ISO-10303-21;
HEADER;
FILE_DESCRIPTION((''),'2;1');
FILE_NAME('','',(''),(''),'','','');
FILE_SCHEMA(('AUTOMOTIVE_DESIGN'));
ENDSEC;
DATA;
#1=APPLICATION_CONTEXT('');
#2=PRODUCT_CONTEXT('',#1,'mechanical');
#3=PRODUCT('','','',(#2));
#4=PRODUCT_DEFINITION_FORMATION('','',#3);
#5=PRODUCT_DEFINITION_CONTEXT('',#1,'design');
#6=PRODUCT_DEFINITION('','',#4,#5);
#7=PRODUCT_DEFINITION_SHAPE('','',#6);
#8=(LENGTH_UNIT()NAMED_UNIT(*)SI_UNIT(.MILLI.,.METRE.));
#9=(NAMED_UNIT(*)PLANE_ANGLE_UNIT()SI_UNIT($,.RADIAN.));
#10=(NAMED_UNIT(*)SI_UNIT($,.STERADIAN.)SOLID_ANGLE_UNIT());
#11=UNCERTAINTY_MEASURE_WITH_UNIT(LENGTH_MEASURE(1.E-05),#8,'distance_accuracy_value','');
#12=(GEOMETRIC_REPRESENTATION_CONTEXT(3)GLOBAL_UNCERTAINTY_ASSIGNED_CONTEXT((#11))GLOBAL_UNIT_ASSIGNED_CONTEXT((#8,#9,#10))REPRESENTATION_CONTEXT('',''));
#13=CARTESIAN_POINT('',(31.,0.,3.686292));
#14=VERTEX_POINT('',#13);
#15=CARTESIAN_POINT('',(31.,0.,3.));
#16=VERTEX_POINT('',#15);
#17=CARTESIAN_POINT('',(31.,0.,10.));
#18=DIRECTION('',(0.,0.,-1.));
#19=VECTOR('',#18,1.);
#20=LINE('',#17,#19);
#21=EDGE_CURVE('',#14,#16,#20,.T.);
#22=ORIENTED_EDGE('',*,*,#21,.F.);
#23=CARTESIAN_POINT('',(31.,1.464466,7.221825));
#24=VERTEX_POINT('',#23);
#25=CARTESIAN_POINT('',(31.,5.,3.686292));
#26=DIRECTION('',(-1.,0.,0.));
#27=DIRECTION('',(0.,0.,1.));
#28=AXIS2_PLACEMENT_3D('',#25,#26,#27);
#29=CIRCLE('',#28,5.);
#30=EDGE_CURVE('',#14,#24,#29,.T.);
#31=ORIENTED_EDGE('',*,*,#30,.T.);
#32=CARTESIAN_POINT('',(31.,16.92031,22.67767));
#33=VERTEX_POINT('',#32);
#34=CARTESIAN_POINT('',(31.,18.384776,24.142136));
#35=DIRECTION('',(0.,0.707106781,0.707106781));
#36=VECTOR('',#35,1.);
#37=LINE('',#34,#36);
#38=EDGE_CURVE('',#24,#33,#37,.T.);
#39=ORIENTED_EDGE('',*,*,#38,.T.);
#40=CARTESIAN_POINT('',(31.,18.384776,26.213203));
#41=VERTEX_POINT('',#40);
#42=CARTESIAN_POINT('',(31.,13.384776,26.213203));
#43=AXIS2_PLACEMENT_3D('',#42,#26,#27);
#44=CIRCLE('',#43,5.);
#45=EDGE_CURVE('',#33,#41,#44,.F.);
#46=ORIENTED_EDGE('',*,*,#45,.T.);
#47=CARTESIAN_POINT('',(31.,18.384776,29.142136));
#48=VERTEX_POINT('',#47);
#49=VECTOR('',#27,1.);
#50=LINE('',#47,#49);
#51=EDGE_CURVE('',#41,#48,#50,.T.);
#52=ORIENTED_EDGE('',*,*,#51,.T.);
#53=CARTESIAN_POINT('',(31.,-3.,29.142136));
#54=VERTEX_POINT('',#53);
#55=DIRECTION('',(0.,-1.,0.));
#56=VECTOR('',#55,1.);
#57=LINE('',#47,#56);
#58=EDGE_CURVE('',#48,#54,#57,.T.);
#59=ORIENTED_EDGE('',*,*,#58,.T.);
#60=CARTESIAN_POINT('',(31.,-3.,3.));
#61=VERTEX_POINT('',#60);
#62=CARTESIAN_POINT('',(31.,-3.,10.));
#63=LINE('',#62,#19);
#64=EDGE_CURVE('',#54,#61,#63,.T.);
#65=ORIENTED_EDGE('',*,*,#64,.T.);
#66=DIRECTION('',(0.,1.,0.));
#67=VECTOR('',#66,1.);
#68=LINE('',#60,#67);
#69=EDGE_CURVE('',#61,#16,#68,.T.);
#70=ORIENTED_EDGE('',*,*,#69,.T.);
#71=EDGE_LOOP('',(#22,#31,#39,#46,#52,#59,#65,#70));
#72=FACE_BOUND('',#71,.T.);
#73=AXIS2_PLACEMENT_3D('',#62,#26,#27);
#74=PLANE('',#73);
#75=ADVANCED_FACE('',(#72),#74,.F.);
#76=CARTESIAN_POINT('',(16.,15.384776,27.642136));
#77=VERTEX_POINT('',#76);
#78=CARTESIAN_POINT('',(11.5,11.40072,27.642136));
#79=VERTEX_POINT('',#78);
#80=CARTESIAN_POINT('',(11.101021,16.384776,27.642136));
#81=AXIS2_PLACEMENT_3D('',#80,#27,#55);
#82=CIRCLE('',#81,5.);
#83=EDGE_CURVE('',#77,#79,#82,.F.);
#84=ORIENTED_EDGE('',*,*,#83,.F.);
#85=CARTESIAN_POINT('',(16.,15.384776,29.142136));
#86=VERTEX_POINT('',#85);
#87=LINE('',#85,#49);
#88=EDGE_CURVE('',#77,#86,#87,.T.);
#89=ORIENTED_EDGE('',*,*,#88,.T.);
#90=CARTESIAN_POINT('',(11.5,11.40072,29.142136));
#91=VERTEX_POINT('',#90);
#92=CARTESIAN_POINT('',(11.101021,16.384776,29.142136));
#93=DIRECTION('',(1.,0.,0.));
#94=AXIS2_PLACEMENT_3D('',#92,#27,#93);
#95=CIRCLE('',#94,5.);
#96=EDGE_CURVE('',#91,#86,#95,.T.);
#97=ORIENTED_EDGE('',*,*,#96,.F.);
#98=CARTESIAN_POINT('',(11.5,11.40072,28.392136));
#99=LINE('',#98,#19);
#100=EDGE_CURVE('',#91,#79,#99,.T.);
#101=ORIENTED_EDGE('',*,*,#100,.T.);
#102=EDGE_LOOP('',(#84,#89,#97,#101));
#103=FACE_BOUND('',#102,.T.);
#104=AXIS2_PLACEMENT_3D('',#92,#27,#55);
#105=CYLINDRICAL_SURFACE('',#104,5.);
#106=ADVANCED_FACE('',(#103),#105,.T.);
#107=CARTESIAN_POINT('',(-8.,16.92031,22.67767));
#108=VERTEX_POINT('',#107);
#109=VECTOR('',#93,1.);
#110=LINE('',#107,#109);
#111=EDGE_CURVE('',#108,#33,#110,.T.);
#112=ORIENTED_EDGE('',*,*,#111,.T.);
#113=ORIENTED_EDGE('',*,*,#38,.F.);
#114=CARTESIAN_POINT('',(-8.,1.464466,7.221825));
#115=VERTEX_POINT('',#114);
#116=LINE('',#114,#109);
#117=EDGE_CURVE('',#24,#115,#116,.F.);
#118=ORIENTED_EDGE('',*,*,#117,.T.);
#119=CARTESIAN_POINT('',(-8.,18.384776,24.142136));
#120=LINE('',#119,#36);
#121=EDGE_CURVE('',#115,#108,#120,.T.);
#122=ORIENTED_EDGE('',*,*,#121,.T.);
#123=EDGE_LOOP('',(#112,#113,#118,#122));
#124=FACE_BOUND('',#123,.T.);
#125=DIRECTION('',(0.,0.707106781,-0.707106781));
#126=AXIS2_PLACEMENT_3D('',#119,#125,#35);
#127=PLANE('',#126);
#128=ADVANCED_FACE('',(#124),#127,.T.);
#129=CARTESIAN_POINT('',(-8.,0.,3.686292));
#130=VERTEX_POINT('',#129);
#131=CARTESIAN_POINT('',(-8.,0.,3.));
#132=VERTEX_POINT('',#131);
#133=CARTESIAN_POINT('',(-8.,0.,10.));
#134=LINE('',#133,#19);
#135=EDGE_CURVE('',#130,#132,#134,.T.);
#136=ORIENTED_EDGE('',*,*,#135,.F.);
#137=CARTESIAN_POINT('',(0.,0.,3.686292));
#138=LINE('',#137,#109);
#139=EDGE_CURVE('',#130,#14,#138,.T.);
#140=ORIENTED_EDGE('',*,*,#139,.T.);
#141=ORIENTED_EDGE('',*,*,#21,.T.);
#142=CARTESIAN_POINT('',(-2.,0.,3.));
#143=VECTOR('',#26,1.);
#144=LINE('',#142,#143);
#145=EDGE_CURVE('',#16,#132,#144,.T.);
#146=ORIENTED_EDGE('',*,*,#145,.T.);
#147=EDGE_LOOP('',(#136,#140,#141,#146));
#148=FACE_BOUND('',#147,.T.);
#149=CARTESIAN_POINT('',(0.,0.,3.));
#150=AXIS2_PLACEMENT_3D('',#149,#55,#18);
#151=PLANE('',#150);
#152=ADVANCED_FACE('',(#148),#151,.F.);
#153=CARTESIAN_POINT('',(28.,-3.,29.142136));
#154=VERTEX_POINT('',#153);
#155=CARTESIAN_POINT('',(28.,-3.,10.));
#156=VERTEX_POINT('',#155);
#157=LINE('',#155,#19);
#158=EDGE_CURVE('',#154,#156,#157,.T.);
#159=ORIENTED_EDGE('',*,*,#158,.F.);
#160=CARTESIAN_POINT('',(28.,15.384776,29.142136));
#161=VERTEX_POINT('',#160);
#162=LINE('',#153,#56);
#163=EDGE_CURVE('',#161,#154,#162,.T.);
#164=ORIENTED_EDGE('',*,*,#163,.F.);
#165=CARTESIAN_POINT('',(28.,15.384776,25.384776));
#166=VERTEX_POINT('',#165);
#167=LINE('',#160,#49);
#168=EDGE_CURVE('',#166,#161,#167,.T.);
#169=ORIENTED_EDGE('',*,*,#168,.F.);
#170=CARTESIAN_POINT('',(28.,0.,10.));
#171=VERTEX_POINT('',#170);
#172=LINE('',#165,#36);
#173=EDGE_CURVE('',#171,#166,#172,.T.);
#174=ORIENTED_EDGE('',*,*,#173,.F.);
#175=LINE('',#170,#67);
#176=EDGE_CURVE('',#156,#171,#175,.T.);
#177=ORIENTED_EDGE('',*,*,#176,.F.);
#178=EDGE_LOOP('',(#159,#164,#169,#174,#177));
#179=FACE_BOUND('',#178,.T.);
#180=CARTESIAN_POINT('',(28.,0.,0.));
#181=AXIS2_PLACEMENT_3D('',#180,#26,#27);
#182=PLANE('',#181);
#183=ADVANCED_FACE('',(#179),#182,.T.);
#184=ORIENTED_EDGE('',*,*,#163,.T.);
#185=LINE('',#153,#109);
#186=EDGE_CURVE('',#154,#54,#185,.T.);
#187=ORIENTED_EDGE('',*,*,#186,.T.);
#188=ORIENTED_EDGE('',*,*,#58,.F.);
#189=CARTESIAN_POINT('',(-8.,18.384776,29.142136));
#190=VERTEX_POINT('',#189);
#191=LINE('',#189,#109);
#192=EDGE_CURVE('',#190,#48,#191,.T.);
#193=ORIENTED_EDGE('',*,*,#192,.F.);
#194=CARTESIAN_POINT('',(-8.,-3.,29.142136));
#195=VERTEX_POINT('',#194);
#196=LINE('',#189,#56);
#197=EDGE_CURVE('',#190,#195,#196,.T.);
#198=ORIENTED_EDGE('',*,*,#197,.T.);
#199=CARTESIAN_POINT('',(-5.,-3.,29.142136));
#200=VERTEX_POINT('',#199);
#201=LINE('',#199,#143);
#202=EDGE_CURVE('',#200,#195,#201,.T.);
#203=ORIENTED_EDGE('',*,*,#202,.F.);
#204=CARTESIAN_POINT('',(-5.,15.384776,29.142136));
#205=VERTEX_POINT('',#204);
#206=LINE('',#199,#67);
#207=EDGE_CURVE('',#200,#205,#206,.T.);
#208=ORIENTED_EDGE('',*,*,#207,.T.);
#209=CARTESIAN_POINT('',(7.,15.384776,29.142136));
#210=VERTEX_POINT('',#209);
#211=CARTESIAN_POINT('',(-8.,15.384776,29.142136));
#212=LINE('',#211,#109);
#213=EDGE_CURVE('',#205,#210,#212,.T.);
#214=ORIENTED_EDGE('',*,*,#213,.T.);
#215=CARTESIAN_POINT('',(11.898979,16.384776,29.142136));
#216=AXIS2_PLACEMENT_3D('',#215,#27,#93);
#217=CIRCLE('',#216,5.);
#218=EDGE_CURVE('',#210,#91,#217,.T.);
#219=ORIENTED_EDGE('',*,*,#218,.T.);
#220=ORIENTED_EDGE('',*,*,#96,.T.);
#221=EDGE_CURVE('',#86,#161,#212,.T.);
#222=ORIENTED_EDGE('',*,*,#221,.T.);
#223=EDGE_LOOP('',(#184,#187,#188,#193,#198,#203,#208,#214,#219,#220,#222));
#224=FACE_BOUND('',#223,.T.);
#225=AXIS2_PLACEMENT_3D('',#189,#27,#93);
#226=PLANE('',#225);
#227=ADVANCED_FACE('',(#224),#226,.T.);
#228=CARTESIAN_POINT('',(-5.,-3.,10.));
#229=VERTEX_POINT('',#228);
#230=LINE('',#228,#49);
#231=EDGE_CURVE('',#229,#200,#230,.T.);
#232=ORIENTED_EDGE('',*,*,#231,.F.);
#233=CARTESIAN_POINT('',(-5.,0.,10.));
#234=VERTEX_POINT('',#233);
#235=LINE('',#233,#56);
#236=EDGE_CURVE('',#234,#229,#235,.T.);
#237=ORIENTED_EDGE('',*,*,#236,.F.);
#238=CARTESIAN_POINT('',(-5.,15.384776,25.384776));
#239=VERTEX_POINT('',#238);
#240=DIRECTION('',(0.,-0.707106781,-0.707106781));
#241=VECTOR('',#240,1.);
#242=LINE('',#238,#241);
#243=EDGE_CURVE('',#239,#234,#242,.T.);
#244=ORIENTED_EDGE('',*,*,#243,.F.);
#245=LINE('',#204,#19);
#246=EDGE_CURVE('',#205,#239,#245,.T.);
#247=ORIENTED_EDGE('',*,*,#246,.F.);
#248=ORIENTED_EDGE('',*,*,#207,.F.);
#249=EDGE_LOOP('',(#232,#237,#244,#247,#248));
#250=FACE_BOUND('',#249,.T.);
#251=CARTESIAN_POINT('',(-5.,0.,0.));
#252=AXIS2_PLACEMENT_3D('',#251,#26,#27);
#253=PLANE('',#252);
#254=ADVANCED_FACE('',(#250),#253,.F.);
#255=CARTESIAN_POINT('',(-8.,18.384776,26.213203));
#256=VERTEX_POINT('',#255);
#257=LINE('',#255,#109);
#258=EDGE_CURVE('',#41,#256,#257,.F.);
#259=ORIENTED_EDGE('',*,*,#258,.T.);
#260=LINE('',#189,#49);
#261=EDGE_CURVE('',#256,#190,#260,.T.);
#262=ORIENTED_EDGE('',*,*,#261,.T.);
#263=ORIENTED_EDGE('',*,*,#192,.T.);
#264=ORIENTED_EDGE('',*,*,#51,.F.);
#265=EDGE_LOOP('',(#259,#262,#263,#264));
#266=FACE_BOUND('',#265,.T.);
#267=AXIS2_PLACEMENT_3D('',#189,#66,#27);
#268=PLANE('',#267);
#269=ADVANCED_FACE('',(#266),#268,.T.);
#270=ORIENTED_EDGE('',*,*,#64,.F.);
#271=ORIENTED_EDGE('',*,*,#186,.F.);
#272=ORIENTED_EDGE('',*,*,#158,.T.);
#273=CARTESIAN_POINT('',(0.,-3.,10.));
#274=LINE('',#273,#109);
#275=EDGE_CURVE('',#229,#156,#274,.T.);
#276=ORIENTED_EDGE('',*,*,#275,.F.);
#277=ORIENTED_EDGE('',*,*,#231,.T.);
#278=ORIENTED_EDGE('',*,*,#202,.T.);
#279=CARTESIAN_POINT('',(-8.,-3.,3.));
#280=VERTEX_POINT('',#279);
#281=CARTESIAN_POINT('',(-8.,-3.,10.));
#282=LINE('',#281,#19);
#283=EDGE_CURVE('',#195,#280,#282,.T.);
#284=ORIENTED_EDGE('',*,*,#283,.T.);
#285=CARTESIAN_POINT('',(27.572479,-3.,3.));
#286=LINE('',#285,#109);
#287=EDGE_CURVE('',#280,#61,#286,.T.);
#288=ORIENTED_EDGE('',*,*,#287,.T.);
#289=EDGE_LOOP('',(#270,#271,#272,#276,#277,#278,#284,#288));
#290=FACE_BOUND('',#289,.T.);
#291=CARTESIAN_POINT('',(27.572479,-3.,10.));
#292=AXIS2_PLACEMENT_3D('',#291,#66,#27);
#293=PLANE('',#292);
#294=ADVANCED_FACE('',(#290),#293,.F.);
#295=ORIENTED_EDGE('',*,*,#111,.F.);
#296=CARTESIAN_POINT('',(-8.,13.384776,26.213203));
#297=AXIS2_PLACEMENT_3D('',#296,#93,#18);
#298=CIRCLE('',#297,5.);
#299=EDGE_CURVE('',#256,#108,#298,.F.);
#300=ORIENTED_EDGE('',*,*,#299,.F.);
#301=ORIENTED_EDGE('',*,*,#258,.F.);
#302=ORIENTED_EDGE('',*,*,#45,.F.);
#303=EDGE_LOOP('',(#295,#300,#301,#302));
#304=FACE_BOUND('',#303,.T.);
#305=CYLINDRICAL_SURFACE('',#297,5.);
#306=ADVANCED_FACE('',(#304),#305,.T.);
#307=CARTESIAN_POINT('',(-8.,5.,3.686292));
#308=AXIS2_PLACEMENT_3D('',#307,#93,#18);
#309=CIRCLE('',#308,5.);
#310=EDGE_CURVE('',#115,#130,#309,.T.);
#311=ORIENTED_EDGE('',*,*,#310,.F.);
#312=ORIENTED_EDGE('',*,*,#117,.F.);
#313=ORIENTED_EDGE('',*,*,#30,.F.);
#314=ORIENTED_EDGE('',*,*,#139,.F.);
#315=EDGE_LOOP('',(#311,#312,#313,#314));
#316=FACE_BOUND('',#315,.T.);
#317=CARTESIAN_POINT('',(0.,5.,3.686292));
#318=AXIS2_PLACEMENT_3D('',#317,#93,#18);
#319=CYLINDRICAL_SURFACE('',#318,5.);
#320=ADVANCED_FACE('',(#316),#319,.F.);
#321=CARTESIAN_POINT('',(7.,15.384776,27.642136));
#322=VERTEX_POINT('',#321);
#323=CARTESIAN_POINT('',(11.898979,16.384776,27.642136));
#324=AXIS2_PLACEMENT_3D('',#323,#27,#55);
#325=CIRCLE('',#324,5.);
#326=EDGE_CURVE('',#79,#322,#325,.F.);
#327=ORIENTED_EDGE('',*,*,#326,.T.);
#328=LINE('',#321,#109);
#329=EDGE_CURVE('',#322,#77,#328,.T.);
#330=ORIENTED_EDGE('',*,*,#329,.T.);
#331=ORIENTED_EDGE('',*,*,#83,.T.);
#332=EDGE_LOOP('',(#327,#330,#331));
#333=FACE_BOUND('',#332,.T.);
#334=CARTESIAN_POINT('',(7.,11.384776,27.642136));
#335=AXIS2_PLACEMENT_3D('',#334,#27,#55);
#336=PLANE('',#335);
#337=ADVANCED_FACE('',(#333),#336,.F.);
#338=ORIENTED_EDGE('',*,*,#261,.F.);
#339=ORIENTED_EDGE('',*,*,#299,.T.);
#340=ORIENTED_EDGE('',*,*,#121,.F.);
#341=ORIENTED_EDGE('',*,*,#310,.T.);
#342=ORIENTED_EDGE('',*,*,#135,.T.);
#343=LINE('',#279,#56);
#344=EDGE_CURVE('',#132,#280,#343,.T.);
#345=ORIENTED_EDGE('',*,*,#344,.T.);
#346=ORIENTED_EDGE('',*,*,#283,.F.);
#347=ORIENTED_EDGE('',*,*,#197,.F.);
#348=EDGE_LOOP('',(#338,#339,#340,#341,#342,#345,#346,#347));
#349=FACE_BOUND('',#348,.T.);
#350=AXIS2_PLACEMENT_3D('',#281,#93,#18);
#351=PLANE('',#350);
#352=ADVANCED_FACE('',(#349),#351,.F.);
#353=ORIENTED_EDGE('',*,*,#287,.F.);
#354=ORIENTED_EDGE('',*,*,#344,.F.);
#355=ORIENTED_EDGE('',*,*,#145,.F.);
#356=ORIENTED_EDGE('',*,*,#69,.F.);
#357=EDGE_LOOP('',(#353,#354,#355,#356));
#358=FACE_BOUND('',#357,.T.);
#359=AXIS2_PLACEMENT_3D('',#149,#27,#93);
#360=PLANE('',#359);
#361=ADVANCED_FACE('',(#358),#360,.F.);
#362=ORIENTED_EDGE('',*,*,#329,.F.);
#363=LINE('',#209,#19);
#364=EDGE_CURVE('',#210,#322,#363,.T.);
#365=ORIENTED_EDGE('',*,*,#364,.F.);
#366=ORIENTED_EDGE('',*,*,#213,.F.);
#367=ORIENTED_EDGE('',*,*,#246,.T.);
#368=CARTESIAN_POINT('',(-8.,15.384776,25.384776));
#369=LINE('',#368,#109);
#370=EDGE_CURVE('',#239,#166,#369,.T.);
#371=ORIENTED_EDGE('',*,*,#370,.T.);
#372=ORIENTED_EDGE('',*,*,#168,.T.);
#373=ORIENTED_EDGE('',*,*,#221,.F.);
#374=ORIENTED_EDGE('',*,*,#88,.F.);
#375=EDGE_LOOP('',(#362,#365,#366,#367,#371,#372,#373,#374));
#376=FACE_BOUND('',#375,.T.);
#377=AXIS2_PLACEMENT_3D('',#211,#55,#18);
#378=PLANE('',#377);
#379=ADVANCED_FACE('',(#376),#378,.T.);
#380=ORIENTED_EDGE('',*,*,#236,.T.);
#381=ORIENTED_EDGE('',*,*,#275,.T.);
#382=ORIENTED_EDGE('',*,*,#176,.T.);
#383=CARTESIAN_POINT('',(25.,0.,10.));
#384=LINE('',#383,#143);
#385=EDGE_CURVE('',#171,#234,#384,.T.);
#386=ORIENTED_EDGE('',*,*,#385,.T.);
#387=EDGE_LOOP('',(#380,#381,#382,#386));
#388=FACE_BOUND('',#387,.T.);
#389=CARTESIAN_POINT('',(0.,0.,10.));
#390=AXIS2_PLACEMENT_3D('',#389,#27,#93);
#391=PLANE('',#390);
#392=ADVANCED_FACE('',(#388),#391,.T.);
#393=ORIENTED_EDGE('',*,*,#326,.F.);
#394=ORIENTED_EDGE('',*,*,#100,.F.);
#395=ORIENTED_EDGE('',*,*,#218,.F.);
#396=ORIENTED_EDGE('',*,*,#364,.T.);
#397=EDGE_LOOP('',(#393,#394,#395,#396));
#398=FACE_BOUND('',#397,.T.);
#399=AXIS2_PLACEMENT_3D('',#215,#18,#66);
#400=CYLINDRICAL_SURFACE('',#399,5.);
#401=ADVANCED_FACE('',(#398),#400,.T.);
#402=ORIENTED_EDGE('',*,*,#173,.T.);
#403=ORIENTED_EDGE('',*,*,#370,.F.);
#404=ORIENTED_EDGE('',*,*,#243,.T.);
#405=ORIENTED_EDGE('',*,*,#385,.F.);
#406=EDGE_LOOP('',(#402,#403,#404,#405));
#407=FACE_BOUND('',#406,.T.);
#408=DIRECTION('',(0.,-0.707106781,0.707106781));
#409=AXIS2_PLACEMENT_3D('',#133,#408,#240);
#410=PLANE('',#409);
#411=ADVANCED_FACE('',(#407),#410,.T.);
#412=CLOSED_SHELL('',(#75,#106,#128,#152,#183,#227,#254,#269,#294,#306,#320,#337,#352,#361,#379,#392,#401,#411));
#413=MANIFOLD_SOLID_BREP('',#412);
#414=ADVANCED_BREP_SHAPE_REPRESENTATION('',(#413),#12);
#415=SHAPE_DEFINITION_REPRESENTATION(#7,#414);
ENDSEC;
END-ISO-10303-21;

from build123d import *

# Parameters (mm, degrees)
SKETCH_1_W          = 25
SKETCH_1_H          = 10
EXTRUDE_1_DEPTH     = 3
EXTRUDE_3_DEPTH     = 7
EXTRUDE_4_DEPTH     = 39
EXTRUDE_6_DEPTH     = 3
EXTRUDE_7_DEPTH     = 3
SKETCH_10_W         = 25
SKETCH_10_H         = 10
CUT_EXTRUDE_1_DEPTH = 3
FILLET_1_R          = 5
FILLET_2_R          = 5
SKETCH_12_W         = 9
SKETCH_12_H         = 1.5
EXTRUDE_9_DEPTH     = 4
FILLET_3_R          = 5


with BuildPart() as part:
    # 草图1 → 凸台-拉伸1 (new body)
    with BuildSketch(Plane.XY):
        with Locations((12.5, -5)):
            Rectangle(SKETCH_1_W, SKETCH_1_H)
    extrude(amount=EXTRUDE_1_DEPTH)

    # 草图5 → 凸台-拉伸3 (add)
    with BuildSketch(Plane.XY.offset(3)):
        Polygon((25, 0), (-2, 0), (-8, 0), (-8, -3), (0, -3), (27.572478777, -3), (31, -3), (31, 0), align=None)
    extrude(amount=EXTRUDE_3_DEPTH)

    # 草图6 → 凸台-拉伸4 (add)
    with BuildSketch(Plane(origin=(31, 0, 0), x_dir=(0, 0, -1), z_dir=(1, 0, 0))):
        Polygon((-10, 0), (-25.384776311, 15.384776311), (-29.142135624, 15.384776311), (-29.142135624, 18.384776311), (-24.142135624, 18.384776311), (-5.757359313, 0), align=None)
    extrude(amount=-EXTRUDE_4_DEPTH)

    # 草图8 → 凸台-拉伸6 (add)
    with BuildSketch(Plane(origin=(31, 0, 0), x_dir=(0, 0, -1), z_dir=(1, 0, 0))):
        Polygon((-29.142135624, 15.384776311), (-25.384776311, 15.384776311), (-10, 0), (-10, -3), (-29.142135624, -3), align=None)
    extrude(amount=-EXTRUDE_6_DEPTH)

    # 草图9 → 凸台-拉伸7 (add)
    with BuildSketch(Plane.ZY.offset(8)):
        Polygon((29.142135624, 15.384776311), (25.384776311, 15.384776311), (10, 0), (10, -3), (29.142135624, -3), align=None)
    extrude(amount=-EXTRUDE_7_DEPTH)

    # 草图10 → 切除-拉伸1 (cut)
    with BuildSketch(Plane(origin=(0, 0, 0), x_dir=(-1, 0, 0), z_dir=(0, 0, -1))):
        with Locations((-12.5, -5)):
            Rectangle(SKETCH_10_W, SKETCH_10_H)
    extrude(amount=-CUT_EXTRUDE_1_DEPTH, mode=Mode.SUBTRACT)

    # 圆角1
    fillet_1_edges = [part.edges().sort_by_distance(p)[0] for p in [
        (11.5, 18.384776311, 24.142135624),
    ]]
    fillet(fillet_1_edges, radius=FILLET_1_R)

    # 圆角2
    fillet_2_edges = [part.edges().sort_by_distance(p)[0] for p in [
        (11.5, 0, 5.757359313),
    ]]
    fillet(fillet_2_edges, radius=FILLET_2_R)

    # 草图12 → 凸台-拉伸9 (add)
    with BuildSketch(Plane(origin=(0, 15.384776311, 0), x_dir=(-1, 0, 0), z_dir=(0, -1, 0))):
        with Locations((-11.5, -28.392135624)):
            Rectangle(SKETCH_12_W, SKETCH_12_H)
    extrude(amount=EXTRUDE_9_DEPTH)

    # 圆角3
    # the kernel refuses this fillet: 5 mm, written as the material it takes off along each edge
    with BuildSketch(Plane(origin=(16, 11.384776311, 41.389584338), x_dir=(-1.590727549682408e-12, 1.0, 0), z_dir=(0, 0, -1))) as fillet_3_piece_1_section:
        with BuildLine():
            CenterArc((5, -4.898979486), FILLET_3_R, 101.536959033, 78.463040967)
            Line((0, -4.898979486), (0, 0))
            Line((0, 0), (4, 0))
        make_face()
    fillet_3_piece_1 = extrude(amount=25.994897428, mode=Mode.PRIVATE)
    fillet_3_piece_1 = split(fillet_3_piece_1, bisect_by=Plane(origin=(14.26962273, 15.448091311, 25.448091311), z_dir=(0, -0.7071067811865475, 0.7071067811865476)), keep=Keep.TOP, mode=Mode.PRIVATE)
    add(fillet_3_piece_1, mode=Mode.SUBTRACT)
    with BuildSketch(Plane(origin=(7, 11.384776311, 15.39468691), x_dir=(1.5905055050774829e-12, 1.0, 0), z_dir=(0, 0, 1))) as fillet_3_piece_2_section:
        with BuildLine():
            CenterArc((5, -4.898979486), FILLET_3_R, 101.536959033, 78.463040967)
            Line((0, -4.898979486), (0, 0))
            Line((0, 0), (4, 0))
        make_face()
    fillet_3_piece_2 = extrude(amount=25.994897428, mode=Mode.PRIVATE)
    fillet_3_piece_2 = split(fillet_3_piece_2, bisect_by=Plane(origin=(8.73037727, 15.448091311, 25.448091311), z_dir=(0, -0.7071067811865475, 0.7071067811865476)), keep=Keep.TOP, mode=Mode.PRIVATE)
    add(fillet_3_piece_2, mode=Mode.SUBTRACT)


solid = part.part
